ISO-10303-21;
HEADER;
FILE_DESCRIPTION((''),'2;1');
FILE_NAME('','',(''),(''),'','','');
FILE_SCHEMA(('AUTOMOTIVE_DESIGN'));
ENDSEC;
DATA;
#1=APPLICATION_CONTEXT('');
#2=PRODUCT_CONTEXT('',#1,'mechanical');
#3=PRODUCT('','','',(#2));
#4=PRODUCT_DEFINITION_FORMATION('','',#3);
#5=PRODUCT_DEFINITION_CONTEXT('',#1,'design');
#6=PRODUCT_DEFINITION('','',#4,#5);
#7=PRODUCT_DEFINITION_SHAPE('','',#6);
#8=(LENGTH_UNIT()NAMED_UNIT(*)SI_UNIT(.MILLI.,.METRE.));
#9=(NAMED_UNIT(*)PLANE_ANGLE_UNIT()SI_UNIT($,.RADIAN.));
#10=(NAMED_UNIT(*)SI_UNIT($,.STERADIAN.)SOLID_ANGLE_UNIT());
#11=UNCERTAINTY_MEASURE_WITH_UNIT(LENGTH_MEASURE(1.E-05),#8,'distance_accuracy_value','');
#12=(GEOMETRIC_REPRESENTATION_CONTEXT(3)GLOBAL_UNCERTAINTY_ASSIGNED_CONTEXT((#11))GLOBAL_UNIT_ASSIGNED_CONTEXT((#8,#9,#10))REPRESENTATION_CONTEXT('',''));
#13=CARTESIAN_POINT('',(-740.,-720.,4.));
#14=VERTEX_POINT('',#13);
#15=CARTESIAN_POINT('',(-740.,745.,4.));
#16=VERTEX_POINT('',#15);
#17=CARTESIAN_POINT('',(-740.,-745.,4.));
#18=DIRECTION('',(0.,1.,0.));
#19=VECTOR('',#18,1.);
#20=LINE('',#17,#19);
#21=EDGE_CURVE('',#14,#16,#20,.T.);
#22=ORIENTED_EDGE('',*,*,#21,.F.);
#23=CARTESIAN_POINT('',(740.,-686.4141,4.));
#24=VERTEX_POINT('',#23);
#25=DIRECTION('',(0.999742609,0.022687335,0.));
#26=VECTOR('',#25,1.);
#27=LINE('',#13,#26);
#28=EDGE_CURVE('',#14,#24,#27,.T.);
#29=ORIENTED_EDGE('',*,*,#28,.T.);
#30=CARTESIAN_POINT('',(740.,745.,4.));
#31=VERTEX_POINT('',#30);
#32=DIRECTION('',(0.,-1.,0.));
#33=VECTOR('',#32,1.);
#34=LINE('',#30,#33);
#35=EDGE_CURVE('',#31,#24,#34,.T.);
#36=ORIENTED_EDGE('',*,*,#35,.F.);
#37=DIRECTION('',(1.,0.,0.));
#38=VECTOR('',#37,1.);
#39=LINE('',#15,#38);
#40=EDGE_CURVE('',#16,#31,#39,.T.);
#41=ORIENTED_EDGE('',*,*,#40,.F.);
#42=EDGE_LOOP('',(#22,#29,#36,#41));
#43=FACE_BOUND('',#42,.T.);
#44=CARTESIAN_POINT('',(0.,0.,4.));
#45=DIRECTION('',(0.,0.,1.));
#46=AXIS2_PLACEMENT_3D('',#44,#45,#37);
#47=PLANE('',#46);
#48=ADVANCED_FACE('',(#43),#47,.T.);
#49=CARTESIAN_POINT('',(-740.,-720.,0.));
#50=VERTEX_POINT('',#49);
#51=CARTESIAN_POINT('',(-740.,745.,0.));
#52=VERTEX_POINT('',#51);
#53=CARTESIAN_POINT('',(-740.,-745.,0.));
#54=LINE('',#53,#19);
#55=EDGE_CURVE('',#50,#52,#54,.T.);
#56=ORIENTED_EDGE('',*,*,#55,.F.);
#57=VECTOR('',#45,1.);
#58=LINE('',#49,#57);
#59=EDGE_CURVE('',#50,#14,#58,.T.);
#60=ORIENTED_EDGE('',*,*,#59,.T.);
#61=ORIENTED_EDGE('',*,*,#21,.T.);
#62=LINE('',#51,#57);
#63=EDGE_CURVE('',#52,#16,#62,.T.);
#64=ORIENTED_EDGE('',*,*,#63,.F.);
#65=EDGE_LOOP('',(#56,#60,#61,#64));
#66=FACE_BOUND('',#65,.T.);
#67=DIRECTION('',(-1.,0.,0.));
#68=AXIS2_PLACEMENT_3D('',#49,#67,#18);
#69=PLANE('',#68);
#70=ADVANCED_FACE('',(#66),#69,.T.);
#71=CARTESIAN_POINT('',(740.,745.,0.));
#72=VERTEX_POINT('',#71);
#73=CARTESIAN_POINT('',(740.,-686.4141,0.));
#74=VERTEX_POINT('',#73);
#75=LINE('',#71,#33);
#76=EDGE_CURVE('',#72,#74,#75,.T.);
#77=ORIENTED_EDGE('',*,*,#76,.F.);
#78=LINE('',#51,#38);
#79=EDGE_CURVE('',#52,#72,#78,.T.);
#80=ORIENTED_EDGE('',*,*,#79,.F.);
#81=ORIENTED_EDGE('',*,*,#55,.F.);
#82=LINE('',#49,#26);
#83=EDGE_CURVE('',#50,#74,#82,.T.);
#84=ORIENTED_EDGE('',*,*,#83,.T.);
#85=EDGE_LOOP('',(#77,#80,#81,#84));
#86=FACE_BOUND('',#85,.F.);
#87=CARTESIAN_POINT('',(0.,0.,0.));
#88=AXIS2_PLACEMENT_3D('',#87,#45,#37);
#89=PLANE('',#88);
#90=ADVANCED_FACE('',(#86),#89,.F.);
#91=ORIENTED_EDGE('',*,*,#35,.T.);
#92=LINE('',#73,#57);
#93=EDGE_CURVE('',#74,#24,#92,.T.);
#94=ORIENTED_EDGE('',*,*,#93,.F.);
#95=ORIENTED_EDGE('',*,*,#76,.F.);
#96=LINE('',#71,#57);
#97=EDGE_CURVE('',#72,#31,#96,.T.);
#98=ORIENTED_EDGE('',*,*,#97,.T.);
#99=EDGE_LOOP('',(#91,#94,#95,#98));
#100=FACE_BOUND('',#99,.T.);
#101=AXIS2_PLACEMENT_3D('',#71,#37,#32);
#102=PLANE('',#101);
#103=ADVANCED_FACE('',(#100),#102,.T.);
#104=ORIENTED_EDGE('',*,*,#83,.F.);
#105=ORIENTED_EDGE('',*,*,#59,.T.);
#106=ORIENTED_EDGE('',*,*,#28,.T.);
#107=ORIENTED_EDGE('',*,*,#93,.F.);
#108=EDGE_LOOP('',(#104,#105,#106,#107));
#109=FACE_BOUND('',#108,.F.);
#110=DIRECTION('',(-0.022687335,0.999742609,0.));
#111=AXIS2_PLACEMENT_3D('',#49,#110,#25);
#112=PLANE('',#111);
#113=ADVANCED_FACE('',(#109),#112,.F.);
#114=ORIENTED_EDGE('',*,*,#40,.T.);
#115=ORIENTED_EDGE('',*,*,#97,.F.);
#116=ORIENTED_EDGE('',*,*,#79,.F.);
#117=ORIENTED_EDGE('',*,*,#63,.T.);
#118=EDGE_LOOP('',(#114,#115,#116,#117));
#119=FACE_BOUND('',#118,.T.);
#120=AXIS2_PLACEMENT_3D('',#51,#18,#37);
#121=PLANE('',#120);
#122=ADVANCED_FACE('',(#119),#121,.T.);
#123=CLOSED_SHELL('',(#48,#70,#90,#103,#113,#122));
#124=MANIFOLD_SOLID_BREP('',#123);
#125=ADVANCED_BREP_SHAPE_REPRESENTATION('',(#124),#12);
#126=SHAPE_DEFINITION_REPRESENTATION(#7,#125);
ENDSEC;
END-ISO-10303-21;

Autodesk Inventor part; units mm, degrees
ref_plane "YZ Plane" through (0, 0, 0) normal (1, 0, 0) x (0, 1, 0)
ref_plane "XZ Plane" through (0, 0, 0) normal (0, 1, 0) x (-1, 0, 0)
ref_plane "XY Plane" through (0, 0, 0) normal (0, 0, 1) x (1, 0, 0)
sketch "Sketch1" plane through (0, 0, 0) normal (0, 0, 1) x (1, 0, 0)
  line L0 (740, -745) -> (-740, -745)
  line L1 (-740, -745) -> (-740, 745)
  line L2 (-740, 745) -> (740, 745)
  line L3 (740, 745) -> (740, -745)
  line L4 (740, -745) -> (-740, 745) construction
  line L5 (-740, -745) -> (740, 745) construction
  line L6 (-740, -720) -> (740, -686.4141)
  point P0 (0, 0)
  dimension "d0" = 1480
  dimension "d1" = 1490
  dimension "d9" = 1.3
  dimension "d10" = 25
extrude "Plate1" add sketch "Sketch1" along normal blind 4 contours L6 L1 L2 L3
sketch "Эскиз2" plane through (0, 0, 0) normal (0, 0, -1) x (-1, 0, 0)
  line L0 (582.7476, -597.0649) -> (582.7476, -1095.2011) construction
  line L1 (582.7476, -1095.2011) -> (543.1204, -1095.2011) construction
  line L2 (543.1204, -1095.2011) -> (543.1204, -597.0649) construction
  line L3 (543.1204, -597.0649) -> (582.7476, -597.0649) construction
  line L4 (209.363, -492.5) -> (209.363, -589.5) projected
  line L5 (209.363, -589.5) -> (205.363, -589.5) projected
  line L6 (-290.5101, -492.5) -> (-290.5101, -589.5) projected
  line L7 (-290.5101, -589.5) -> (-294.5101, -589.5) projected
  line L8 (-290.5101, 715.5) -> (-290.5101, 775.5) projected
  line L9 (-290.5101, 715.5) -> (-294.5101, 715.5) projected
  line L10 (209.363, 715.5) -> (209.363, 775.5) projected
  line L11 (209.363, 715.5) -> (205.363, 715.5) projected
  line L12 (-740, -489) -> (-710, -489) projected
  line L13 (-710, -489) -> (-710, -485) projected
  line L14 (-740, 7.6667) -> (-710, 7.6667) projected
  line L15 (-710, 7.6667) -> (-710, 11.6667) projected
  line L16 (-740, 504.3333) -> (-710, 504.3333) projected
  line L17 (-710, 504.3333) -> (-710, 508.3333) projected
  line L18 (739.6246, -489) -> (739.6246, -485) projected
  line L19 (739.6246, 7.6667) -> (739.6246, 11.6667) projected
  line L20 (739.6246, 504.3333) -> (739.6246, 508.3333) projected
  line L21 (739.6246, 504.3333) -> (709.6246, 504.3333)
  line L22 (739.6246, 7.1667) -> (709.6246, 7.1667)
  line L23 (739.6246, -489.5) -> (709.6246, -489.5)
  point P0 (0, 0)
  dimension "d6" = 30
  dimension "d7" = 30
  dimension "d8" = 30
mark "Маркировка1"
equation "\"d0\" = Лист_ширина"
equation "\"d1\" = 0.5 * Лист_длина"
equation "\"d2\" = Thickness"
equation "\"BendRadius\" = Thickness"
equation "\"BendReliefWidth\" = Thickness"
equation "\"BendReliefDepth\" = 0.5 * Thickness"
equation "\"CornerReliefSize\" = 4 * Thickness"
equation "\"MinimumRemnant\" = 2 * Thickness"
equation "\"TransitionRadius\" = BendRadius"
equation "\"JacobiRadiusSize\" = BendRadius"
equation "\"GapSize\" = Thickness"
equation "\"Лист_ширина\" = 1480"
equation "\"Лист_длина\" = 2980"
equation "\"Thickness\" = 4"
properties part number "GBK 3317 shield 7" material "Steel"
